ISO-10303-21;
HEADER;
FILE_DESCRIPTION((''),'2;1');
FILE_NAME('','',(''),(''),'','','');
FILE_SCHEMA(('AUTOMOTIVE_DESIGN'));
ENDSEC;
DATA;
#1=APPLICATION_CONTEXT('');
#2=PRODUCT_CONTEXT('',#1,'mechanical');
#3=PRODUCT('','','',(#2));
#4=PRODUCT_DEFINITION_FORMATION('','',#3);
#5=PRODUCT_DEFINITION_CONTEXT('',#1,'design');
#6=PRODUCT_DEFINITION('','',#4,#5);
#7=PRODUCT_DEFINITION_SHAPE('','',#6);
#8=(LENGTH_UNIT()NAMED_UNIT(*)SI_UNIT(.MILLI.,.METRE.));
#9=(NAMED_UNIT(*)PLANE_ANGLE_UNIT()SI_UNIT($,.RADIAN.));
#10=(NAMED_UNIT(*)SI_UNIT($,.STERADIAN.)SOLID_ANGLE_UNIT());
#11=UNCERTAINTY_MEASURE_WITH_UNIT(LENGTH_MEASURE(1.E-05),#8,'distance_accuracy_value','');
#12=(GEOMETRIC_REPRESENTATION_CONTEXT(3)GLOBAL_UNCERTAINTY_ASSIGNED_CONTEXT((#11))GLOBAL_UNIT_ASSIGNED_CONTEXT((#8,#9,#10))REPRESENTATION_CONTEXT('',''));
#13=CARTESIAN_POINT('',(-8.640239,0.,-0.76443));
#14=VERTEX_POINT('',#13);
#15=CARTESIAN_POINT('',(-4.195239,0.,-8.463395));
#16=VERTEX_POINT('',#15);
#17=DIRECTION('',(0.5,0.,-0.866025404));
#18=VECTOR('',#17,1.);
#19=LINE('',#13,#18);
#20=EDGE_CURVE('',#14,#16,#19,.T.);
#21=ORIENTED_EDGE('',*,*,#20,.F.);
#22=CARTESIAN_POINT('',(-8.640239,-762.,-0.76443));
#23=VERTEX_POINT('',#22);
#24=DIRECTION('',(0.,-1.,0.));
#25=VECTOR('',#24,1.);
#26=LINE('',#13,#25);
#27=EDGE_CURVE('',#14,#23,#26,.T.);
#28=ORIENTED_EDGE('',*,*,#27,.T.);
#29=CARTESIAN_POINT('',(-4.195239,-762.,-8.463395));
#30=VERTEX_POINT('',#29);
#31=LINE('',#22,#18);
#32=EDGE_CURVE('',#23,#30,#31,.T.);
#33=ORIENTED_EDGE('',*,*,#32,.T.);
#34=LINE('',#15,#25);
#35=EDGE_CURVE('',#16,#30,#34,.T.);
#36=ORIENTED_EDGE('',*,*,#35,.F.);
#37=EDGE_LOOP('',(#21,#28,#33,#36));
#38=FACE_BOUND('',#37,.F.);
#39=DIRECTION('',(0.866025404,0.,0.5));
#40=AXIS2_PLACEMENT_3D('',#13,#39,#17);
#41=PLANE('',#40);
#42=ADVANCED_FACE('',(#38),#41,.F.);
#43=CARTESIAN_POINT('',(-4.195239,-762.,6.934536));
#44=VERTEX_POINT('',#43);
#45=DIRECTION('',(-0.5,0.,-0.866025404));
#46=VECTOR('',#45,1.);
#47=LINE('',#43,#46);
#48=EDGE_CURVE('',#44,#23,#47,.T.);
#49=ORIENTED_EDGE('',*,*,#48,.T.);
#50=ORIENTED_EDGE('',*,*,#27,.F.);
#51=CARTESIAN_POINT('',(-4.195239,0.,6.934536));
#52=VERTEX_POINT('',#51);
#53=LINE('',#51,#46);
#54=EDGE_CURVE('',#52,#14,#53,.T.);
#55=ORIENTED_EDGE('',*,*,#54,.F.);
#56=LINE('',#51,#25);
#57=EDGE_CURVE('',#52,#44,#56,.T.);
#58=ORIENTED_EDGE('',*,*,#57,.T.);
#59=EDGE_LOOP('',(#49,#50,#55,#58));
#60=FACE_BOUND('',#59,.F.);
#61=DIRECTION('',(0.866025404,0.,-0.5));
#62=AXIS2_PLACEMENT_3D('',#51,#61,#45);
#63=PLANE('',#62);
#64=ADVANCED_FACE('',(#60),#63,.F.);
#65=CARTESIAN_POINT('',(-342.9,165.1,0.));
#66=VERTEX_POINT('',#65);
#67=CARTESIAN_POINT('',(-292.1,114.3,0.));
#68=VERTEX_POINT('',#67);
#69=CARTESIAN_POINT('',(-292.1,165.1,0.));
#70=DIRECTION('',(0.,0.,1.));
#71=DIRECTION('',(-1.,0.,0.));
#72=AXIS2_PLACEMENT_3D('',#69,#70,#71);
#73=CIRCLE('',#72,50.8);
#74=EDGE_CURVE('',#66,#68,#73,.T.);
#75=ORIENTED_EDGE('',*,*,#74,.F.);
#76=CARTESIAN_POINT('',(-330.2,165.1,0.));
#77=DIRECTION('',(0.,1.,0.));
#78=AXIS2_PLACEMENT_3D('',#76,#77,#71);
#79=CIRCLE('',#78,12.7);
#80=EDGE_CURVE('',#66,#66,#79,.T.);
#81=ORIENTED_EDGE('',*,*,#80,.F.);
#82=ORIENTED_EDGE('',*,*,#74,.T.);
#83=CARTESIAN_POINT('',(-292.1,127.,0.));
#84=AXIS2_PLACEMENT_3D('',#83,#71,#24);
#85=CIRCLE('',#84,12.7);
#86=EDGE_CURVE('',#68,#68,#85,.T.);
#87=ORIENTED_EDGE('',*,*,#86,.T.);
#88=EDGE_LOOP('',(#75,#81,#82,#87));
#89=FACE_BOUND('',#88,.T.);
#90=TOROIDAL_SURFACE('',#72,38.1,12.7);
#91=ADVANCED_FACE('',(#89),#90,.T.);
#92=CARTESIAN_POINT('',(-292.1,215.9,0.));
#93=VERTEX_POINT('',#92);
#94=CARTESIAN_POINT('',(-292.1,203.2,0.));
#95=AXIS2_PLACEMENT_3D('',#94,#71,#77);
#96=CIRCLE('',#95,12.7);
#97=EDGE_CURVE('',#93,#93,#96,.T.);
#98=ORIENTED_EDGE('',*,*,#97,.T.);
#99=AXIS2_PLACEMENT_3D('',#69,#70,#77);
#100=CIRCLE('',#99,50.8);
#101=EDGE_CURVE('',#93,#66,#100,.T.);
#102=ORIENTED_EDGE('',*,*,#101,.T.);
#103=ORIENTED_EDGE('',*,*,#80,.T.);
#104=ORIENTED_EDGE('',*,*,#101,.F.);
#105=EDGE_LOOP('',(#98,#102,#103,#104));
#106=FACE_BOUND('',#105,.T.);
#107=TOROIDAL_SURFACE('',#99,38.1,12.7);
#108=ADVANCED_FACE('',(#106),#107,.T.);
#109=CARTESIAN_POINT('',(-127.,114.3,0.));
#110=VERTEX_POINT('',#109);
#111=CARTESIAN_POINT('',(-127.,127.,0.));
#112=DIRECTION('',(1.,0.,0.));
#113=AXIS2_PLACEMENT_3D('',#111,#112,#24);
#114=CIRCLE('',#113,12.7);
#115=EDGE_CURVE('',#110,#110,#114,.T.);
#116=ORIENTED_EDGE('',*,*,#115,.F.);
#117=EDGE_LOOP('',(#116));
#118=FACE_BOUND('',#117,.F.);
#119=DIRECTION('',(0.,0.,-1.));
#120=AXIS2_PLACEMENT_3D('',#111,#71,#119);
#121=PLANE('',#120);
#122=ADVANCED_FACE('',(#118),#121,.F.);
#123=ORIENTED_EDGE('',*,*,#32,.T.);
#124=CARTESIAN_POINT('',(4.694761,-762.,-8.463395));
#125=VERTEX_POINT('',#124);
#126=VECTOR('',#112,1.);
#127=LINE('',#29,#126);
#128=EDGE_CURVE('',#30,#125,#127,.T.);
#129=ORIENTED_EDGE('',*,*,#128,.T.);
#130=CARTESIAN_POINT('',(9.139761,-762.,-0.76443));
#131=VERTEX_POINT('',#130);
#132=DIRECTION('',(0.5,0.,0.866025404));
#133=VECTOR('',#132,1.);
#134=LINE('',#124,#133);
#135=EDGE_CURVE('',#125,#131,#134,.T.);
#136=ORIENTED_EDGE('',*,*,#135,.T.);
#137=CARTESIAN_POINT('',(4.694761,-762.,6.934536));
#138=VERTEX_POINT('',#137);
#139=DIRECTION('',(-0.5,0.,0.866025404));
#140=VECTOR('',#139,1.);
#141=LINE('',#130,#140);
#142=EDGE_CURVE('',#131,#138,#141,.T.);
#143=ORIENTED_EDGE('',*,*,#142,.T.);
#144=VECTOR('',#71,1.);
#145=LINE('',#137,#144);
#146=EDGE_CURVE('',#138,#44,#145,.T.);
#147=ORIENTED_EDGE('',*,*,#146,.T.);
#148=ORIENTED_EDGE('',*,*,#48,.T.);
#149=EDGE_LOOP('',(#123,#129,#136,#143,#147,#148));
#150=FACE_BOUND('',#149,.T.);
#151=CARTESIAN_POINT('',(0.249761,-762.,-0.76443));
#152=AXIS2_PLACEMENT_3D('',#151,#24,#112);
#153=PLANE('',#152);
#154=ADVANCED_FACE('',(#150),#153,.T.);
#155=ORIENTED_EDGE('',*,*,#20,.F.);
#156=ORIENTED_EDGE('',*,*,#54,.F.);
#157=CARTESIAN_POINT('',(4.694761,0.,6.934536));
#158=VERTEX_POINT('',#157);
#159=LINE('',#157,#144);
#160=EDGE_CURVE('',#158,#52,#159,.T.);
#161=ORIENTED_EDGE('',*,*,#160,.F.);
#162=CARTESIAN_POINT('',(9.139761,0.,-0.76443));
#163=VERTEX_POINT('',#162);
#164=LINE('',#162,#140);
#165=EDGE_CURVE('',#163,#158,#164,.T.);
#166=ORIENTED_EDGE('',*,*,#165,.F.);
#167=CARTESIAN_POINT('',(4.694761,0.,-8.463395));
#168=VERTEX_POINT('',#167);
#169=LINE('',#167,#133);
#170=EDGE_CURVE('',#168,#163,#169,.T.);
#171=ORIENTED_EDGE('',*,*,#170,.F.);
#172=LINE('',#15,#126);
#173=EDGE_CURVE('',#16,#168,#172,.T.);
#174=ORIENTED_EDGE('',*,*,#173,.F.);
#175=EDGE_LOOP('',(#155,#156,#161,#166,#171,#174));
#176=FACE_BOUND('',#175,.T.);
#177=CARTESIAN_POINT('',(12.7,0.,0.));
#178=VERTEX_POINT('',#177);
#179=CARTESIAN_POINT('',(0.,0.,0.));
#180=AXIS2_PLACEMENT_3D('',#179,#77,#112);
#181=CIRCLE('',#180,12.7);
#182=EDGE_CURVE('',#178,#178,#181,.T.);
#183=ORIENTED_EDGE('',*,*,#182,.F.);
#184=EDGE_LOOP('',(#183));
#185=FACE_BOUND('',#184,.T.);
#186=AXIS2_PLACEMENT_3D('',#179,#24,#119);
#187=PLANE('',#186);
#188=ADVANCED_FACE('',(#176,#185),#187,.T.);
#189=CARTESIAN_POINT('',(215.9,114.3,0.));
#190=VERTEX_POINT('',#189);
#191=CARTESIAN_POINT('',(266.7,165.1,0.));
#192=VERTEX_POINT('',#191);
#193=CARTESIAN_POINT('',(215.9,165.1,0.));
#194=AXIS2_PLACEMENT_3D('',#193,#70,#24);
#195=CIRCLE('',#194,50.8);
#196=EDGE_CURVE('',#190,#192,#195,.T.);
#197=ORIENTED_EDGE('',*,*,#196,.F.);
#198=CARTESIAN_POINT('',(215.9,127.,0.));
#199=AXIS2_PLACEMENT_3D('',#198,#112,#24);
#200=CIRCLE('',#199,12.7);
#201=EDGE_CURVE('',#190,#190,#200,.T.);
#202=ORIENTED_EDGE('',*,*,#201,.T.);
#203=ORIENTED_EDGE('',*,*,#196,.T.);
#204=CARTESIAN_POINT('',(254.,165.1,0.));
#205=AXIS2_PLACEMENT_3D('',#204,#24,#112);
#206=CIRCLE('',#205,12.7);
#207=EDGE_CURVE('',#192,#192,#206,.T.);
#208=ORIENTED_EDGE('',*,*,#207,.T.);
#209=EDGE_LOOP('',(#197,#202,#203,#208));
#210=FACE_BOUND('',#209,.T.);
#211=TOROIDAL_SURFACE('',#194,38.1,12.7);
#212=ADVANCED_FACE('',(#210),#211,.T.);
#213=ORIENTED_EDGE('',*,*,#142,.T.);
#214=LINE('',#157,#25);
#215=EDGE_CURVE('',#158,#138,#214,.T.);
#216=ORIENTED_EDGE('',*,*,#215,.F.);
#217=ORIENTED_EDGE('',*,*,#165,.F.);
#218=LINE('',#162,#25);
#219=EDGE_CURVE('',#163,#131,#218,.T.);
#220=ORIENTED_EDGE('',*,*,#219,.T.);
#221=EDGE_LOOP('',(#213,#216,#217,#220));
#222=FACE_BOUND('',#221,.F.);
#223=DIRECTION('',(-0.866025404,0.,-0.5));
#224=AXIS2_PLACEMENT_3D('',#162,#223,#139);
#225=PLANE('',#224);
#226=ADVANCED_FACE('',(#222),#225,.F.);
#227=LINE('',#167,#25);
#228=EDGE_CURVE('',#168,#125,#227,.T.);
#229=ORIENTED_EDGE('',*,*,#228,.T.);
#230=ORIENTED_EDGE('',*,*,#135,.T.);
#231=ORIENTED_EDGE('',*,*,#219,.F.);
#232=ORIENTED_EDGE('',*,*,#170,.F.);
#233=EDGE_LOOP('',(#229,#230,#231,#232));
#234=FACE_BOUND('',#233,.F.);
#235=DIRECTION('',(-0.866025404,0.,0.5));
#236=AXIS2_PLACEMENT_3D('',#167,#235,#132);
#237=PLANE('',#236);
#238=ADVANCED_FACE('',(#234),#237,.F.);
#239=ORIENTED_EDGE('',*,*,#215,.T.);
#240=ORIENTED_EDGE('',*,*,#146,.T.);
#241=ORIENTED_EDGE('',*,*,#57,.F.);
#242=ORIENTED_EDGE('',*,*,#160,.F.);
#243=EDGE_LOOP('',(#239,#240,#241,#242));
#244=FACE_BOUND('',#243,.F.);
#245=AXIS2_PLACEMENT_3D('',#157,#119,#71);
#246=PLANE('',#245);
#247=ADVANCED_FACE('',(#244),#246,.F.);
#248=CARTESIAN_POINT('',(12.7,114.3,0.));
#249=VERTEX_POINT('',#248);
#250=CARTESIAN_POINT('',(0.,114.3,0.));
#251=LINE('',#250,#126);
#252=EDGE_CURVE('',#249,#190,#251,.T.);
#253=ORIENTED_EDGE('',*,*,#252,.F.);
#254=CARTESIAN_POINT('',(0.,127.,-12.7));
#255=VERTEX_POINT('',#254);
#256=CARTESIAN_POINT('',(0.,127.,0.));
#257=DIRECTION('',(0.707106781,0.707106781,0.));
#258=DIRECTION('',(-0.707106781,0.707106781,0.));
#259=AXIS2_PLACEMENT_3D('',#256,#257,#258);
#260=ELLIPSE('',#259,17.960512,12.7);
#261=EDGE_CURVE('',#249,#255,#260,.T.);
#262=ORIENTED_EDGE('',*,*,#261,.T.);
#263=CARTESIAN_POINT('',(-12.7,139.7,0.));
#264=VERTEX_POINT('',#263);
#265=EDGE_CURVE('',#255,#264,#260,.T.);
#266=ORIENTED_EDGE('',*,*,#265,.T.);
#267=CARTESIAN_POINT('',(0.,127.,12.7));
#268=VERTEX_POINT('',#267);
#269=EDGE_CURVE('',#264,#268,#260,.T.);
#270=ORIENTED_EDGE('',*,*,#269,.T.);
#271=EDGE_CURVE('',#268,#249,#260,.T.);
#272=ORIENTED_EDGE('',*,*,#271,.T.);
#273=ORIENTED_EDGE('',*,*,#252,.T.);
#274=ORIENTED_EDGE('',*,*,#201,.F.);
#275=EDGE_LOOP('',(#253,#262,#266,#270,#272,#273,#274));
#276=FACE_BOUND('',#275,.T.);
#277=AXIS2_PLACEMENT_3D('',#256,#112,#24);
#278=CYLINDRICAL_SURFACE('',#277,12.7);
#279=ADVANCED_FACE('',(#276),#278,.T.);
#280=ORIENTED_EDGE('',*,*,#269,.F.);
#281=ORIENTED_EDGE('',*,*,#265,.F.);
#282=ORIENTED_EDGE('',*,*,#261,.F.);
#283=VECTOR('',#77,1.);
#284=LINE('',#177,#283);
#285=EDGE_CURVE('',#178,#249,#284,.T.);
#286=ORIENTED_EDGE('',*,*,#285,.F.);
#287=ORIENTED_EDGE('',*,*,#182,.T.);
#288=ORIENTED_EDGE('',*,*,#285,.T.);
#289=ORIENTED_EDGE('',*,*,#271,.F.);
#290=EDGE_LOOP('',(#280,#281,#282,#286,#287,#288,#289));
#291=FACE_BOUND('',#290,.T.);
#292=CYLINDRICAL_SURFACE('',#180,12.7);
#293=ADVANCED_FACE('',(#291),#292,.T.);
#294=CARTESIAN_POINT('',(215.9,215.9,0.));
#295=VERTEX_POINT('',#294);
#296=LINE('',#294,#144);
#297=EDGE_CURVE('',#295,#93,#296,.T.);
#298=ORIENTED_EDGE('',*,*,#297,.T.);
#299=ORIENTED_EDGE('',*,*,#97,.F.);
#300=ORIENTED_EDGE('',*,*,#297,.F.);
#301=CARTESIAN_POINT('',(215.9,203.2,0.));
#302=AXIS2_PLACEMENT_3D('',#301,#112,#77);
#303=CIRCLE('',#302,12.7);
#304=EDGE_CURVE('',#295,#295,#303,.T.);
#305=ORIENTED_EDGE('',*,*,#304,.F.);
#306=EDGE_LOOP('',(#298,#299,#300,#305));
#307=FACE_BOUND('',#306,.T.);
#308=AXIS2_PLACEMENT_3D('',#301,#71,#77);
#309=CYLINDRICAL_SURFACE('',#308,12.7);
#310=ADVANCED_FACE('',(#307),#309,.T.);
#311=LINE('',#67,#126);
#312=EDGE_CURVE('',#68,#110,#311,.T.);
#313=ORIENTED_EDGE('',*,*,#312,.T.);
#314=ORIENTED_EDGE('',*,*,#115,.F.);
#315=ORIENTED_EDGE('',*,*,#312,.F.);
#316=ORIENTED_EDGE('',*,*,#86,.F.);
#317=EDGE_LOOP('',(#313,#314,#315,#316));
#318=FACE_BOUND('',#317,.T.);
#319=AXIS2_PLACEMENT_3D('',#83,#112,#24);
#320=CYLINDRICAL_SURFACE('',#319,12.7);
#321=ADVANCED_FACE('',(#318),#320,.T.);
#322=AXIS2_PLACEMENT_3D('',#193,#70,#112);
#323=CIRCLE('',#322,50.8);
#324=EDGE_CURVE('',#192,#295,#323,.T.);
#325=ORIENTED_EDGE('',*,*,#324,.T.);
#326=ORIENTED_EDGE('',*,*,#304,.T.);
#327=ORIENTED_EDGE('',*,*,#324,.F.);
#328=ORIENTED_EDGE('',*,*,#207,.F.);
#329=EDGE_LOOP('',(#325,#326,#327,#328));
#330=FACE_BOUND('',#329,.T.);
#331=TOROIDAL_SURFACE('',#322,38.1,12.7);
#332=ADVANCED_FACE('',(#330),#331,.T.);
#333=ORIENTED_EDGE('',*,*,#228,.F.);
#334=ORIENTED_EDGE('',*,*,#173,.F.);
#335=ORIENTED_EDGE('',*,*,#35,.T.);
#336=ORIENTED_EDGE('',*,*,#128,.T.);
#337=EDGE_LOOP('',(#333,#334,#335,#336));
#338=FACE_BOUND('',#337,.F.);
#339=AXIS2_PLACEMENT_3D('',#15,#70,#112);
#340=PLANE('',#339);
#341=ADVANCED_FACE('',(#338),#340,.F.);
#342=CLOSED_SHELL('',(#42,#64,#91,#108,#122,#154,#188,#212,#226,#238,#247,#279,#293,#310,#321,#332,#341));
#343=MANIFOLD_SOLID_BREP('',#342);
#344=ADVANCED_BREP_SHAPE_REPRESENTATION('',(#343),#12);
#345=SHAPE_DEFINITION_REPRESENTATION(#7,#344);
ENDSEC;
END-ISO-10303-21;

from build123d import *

# Parameters (mm, degrees)
F0_R     = 12.7
F4_DEPTH = 762


with BuildPart() as f2:
    # F2: sweep along a path in F1
    with BuildLine(Plane.XY) as f2_path:
        Line((0, 0), (0, 127))
        Line((0, 127), (215.9, 127))
        ThreePointArc((215.9, 127), (242.8407683632, 138.1592316368), (254, 165.1))
        ThreePointArc((254, 165.1), (242.8407683632, 192.0407683632), (215.9, 203.2))
        Line((215.9, 203.2), (-292.1, 203.2))
        ThreePointArc((-292.1, 203.2), (-319.0407683632, 192.0407683632), (-330.2, 165.1))
        ThreePointArc((-330.2, 165.1), (-319.0407683632, 138.1592316368), (-292.1, 127))
        Line((-292.1, 127), (-127, 127))
    # F0 (on Front) → F2 (sweep)
    with BuildSketch(Plane.XZ):
        Circle(F0_R)
    sweep(path=f2_path.line, transition=Transition.RIGHT)

    # F3 (on face) → F4 (join)
    with BuildSketch(Plane.XZ):
        Polygon((4.6947609848, 6.9345362704), (-4.1952390152, 6.9345362704), (-8.6402390152, -0.7644295692), (-4.1952390152, -8.4633954089), (4.6947609848, -8.4633954089), (9.1397609848, -0.7644295692), align=None)
    extrude(amount=F4_DEPTH)


solid = f2.part
